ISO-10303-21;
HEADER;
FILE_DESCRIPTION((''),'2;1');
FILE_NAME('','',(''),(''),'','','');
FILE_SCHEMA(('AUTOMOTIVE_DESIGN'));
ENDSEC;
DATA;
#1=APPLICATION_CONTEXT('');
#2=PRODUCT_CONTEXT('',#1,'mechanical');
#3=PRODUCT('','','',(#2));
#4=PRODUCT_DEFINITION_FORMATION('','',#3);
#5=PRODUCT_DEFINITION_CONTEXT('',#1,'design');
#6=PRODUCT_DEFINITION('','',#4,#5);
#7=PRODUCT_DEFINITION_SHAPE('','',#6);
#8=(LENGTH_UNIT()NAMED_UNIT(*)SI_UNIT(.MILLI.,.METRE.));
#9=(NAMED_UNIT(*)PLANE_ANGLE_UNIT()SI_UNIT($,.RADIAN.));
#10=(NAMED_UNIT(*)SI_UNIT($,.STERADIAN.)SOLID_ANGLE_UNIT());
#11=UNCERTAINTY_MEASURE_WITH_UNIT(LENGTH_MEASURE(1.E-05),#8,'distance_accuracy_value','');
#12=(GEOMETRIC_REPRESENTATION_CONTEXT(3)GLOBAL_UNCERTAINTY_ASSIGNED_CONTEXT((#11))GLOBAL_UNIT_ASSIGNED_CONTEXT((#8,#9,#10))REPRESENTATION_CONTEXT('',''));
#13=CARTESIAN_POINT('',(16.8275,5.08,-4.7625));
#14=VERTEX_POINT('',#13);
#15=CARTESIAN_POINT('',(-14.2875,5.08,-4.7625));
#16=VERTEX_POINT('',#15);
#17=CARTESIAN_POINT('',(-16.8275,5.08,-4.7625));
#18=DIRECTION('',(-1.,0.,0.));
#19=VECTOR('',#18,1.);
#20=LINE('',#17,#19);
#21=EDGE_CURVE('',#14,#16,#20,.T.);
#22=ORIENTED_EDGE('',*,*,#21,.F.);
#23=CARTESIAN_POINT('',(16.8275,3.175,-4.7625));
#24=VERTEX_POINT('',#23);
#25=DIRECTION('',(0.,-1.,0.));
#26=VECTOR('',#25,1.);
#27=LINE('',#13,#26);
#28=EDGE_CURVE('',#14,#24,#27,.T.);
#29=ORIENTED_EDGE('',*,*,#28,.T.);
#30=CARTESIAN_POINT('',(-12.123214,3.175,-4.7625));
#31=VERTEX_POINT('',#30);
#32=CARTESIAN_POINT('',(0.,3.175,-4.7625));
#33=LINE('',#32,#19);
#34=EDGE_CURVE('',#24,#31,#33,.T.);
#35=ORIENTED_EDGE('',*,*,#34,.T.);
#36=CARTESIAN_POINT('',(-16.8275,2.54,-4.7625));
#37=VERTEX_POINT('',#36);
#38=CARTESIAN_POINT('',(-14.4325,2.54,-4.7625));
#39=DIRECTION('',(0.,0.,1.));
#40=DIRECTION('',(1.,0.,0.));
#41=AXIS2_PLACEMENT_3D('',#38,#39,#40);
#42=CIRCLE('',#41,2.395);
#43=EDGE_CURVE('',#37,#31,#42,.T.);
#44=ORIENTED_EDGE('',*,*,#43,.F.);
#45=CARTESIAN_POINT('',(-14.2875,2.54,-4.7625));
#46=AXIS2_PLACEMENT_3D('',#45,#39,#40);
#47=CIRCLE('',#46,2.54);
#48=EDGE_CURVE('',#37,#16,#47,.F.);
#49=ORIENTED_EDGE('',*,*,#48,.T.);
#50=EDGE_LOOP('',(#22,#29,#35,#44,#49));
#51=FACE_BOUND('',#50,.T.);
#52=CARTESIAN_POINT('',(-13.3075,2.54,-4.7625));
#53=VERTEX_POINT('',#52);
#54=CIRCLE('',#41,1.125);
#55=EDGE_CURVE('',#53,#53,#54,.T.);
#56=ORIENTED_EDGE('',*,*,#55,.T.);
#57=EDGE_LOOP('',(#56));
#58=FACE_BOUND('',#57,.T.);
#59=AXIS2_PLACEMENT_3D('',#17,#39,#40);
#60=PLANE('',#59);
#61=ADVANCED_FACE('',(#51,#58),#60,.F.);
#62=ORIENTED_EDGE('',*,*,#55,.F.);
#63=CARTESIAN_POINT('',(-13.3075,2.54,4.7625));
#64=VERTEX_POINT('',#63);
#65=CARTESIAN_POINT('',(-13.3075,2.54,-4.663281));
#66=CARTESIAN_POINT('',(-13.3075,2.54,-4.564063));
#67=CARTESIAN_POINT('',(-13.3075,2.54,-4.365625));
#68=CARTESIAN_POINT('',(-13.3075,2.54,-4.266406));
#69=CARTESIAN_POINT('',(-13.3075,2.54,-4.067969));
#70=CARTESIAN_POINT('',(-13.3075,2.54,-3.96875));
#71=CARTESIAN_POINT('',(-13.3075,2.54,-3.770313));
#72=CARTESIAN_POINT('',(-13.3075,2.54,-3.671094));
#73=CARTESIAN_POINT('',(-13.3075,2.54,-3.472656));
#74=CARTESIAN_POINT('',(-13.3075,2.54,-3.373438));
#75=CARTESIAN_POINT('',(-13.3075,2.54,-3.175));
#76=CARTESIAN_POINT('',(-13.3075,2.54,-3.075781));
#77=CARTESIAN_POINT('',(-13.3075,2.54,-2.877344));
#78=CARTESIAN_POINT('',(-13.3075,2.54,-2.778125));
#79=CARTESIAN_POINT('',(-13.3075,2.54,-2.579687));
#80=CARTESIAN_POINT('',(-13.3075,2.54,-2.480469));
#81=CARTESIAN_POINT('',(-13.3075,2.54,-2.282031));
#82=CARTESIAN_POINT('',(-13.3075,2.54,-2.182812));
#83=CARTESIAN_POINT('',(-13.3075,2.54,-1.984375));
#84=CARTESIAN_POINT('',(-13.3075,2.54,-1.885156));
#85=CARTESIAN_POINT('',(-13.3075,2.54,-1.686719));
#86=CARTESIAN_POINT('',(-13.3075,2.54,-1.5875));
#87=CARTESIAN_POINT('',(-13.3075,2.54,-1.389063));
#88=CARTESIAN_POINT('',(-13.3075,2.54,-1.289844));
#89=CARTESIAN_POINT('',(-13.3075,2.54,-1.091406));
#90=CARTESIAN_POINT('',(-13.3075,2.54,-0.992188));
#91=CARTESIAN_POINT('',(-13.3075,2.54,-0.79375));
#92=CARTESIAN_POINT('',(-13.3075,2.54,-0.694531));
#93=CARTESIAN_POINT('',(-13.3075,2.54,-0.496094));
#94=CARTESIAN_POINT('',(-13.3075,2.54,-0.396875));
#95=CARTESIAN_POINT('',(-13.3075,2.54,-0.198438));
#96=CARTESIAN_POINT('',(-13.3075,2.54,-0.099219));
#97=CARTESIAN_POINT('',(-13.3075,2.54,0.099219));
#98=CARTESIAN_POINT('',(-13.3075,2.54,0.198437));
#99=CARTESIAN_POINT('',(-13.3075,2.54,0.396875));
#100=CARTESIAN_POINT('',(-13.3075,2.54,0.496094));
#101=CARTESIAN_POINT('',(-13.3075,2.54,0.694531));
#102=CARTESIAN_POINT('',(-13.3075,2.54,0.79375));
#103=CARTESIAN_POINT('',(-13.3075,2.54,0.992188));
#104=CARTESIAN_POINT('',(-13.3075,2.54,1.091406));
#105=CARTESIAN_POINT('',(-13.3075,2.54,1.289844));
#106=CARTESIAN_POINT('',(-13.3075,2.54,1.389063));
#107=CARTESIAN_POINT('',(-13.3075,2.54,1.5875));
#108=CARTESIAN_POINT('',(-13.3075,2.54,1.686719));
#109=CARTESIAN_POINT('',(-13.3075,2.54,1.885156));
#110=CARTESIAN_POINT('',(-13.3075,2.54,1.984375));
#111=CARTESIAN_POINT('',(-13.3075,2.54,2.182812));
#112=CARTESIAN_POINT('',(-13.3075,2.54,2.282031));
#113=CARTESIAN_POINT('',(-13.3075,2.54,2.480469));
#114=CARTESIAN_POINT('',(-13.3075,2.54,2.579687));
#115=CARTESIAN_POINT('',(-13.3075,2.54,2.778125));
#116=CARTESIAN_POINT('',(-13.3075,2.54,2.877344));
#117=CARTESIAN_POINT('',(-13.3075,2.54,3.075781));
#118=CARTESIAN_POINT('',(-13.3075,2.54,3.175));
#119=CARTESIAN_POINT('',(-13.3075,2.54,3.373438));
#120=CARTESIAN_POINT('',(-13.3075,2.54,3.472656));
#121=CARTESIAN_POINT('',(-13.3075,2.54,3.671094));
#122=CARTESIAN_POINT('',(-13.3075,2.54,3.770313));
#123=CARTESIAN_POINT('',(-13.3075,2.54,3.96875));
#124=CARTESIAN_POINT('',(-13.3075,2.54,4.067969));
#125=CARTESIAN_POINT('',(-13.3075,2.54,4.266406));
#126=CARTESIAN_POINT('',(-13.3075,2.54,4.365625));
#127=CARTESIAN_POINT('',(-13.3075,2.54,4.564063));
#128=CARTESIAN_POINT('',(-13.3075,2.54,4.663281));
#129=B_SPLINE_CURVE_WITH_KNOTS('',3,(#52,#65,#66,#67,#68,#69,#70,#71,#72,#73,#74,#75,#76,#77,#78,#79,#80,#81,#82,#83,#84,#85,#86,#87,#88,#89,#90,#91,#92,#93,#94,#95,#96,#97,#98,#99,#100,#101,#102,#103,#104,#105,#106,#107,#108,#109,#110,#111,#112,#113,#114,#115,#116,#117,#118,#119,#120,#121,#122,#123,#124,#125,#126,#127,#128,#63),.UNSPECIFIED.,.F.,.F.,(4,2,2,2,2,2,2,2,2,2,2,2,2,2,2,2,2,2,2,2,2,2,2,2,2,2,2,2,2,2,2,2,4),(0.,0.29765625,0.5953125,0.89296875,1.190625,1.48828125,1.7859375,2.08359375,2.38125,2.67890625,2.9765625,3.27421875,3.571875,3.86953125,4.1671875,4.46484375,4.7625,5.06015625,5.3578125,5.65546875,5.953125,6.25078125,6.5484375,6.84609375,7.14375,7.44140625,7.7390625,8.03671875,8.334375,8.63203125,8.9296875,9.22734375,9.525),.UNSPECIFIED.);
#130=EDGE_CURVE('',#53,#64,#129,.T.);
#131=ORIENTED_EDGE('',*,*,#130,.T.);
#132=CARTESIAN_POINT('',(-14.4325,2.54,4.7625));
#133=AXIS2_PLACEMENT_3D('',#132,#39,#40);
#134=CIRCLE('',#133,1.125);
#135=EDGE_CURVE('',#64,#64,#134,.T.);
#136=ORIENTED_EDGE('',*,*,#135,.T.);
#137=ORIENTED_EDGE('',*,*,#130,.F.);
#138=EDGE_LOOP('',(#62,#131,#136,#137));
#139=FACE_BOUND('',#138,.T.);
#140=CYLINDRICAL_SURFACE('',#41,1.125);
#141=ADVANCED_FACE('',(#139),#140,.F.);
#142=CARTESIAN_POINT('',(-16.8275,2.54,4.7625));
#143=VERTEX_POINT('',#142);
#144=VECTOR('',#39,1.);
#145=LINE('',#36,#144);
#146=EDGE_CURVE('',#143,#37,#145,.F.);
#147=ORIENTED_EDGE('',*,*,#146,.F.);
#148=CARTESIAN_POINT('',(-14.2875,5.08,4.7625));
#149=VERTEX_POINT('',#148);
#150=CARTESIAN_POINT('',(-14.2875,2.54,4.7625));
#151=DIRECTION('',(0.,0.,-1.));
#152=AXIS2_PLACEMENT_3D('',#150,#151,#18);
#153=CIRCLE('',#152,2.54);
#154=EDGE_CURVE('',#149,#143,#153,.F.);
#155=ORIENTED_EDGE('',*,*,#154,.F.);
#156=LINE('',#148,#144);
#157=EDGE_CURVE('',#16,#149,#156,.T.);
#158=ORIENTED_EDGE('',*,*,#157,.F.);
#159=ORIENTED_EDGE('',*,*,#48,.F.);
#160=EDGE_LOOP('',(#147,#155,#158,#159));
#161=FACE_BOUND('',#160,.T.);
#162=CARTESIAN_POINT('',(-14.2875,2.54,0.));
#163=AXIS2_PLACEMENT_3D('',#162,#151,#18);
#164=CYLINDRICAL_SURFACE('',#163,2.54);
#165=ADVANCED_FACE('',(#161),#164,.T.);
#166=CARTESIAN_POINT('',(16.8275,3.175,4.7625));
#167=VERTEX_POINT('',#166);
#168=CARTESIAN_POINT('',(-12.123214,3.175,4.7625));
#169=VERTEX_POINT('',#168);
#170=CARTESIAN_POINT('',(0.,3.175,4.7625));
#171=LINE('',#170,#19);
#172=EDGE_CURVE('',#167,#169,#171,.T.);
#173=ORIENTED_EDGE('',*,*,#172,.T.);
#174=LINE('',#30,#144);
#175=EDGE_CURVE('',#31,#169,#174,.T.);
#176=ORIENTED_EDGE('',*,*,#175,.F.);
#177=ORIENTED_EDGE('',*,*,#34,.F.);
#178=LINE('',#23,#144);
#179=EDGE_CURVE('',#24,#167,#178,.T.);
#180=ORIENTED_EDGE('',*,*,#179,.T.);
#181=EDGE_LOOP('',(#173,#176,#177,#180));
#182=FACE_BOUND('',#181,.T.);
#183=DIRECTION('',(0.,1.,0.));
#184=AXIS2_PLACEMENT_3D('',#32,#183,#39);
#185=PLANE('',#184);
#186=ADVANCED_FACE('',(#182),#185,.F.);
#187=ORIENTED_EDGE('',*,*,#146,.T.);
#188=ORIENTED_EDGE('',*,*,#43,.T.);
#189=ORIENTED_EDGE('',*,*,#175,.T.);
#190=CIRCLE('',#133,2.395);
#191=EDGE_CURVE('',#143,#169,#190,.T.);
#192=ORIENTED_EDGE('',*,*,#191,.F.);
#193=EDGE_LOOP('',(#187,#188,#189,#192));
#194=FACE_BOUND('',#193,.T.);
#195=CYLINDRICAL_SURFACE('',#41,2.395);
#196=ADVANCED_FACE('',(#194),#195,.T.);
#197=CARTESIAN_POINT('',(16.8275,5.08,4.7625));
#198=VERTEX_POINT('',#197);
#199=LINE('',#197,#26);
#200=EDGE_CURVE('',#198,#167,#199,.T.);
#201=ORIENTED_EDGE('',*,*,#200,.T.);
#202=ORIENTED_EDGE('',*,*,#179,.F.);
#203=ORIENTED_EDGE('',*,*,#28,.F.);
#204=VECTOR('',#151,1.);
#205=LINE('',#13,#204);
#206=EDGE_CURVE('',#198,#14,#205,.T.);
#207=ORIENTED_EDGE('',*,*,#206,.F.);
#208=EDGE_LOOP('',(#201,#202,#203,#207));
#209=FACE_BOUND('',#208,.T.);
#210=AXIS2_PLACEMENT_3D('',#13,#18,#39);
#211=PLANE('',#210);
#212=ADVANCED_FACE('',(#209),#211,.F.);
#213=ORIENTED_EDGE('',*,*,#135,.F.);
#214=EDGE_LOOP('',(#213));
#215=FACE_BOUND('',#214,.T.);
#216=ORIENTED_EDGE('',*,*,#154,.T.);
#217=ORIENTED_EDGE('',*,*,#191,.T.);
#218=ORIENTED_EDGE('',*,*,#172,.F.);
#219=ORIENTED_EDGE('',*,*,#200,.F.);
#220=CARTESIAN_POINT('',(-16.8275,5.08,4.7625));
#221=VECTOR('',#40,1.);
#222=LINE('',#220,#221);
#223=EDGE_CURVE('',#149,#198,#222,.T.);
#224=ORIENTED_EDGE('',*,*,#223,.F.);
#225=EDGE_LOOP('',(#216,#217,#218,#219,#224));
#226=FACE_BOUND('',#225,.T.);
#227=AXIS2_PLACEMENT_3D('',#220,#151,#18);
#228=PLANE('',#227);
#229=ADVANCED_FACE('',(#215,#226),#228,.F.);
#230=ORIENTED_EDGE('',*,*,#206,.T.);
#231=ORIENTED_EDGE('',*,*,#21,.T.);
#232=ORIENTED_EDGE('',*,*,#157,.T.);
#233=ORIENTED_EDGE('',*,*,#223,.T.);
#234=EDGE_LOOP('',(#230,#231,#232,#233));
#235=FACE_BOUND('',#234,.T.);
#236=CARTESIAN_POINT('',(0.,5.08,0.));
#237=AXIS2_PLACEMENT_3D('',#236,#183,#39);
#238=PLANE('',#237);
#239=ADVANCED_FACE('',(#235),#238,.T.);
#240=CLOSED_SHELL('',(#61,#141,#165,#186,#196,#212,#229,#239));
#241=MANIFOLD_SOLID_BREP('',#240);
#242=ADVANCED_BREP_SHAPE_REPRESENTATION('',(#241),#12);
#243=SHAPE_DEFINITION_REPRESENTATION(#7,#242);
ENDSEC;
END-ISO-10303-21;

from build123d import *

# Parameters (mm, degrees)
SKETCH1_W           = 33.655
SKETCH1_H           = 9.525
BOSS_EXTRUDE1_DEPTH = 5.08
SKETCH4_R           = 1.125
CUT_EXTRUDE2_DEPTH  = 20.992418094
FILLET1_R           = 2.54
CUT_EXTRUDE3_DEPTH  = 20.992418094


with BuildPart() as part:
    # Sketch1 → Boss-Extrude1 (new body)
    with BuildSketch(Plane(origin=(0, 0, 0), x_dir=(1, 0, 0), z_dir=(0, 1, 0))):
        Rectangle(SKETCH1_W, SKETCH1_H)
    extrude(amount=BOSS_EXTRUDE1_DEPTH)

    # Sketch4 → Cut-Extrude2 (cut, through all)
    with BuildSketch(Plane.XY.offset(4.7625)):
        with Locations((-14.4325, 2.54)):
            Circle(SKETCH4_R)
    extrude(amount=-CUT_EXTRUDE2_DEPTH, mode=Mode.SUBTRACT)

    # Fillet1
    fillet1_edges = [part.edges().sort_by_distance(p)[0] for p in [
        (-16.8275, 0, 0),
        (-16.8275, 5.08, 0),
    ]]
    fillet(fillet1_edges, radius=FILLET1_R - 0.0001)  # a hair under: the kernel refuses the full size

    # Sketch5 → Cut-Extrude3 (cut, through all)
    with BuildSketch(Plane.XY.offset(4.7625)):
        with BuildLine():
            Line((16.8275, 0), (16.8275, 3.175))
            Line((16.8275, 3.175), (-12.123214396, 3.175))
            ThreePointArc((-12.123214396, 3.175), (-12.05902533, 2.860379446), (-12.0375, 2.54))
            ThreePointArc((-12.0375, 2.54), (-14.4325, 0.145), (-16.8275, 2.54))
            ThreePointArc((-16.8275, 2.54), (-16.083551224, 0.743948776), (-14.2875, 0))
            Line((-14.2875, 0), (16.8275, 0))
        make_face()
    extrude(amount=-CUT_EXTRUDE3_DEPTH, mode=Mode.SUBTRACT)


with BuildPart() as cut_extrude3_kept_piece:
    # of the separate pieces the step leaves, the one the design keeps (cut_extrude3_pieces_kept)
    add(part.part.solids().sort_by_distance((-16.8275, 2.5401, -4.7625))[0])


solid = cut_extrude3_kept_piece.part
